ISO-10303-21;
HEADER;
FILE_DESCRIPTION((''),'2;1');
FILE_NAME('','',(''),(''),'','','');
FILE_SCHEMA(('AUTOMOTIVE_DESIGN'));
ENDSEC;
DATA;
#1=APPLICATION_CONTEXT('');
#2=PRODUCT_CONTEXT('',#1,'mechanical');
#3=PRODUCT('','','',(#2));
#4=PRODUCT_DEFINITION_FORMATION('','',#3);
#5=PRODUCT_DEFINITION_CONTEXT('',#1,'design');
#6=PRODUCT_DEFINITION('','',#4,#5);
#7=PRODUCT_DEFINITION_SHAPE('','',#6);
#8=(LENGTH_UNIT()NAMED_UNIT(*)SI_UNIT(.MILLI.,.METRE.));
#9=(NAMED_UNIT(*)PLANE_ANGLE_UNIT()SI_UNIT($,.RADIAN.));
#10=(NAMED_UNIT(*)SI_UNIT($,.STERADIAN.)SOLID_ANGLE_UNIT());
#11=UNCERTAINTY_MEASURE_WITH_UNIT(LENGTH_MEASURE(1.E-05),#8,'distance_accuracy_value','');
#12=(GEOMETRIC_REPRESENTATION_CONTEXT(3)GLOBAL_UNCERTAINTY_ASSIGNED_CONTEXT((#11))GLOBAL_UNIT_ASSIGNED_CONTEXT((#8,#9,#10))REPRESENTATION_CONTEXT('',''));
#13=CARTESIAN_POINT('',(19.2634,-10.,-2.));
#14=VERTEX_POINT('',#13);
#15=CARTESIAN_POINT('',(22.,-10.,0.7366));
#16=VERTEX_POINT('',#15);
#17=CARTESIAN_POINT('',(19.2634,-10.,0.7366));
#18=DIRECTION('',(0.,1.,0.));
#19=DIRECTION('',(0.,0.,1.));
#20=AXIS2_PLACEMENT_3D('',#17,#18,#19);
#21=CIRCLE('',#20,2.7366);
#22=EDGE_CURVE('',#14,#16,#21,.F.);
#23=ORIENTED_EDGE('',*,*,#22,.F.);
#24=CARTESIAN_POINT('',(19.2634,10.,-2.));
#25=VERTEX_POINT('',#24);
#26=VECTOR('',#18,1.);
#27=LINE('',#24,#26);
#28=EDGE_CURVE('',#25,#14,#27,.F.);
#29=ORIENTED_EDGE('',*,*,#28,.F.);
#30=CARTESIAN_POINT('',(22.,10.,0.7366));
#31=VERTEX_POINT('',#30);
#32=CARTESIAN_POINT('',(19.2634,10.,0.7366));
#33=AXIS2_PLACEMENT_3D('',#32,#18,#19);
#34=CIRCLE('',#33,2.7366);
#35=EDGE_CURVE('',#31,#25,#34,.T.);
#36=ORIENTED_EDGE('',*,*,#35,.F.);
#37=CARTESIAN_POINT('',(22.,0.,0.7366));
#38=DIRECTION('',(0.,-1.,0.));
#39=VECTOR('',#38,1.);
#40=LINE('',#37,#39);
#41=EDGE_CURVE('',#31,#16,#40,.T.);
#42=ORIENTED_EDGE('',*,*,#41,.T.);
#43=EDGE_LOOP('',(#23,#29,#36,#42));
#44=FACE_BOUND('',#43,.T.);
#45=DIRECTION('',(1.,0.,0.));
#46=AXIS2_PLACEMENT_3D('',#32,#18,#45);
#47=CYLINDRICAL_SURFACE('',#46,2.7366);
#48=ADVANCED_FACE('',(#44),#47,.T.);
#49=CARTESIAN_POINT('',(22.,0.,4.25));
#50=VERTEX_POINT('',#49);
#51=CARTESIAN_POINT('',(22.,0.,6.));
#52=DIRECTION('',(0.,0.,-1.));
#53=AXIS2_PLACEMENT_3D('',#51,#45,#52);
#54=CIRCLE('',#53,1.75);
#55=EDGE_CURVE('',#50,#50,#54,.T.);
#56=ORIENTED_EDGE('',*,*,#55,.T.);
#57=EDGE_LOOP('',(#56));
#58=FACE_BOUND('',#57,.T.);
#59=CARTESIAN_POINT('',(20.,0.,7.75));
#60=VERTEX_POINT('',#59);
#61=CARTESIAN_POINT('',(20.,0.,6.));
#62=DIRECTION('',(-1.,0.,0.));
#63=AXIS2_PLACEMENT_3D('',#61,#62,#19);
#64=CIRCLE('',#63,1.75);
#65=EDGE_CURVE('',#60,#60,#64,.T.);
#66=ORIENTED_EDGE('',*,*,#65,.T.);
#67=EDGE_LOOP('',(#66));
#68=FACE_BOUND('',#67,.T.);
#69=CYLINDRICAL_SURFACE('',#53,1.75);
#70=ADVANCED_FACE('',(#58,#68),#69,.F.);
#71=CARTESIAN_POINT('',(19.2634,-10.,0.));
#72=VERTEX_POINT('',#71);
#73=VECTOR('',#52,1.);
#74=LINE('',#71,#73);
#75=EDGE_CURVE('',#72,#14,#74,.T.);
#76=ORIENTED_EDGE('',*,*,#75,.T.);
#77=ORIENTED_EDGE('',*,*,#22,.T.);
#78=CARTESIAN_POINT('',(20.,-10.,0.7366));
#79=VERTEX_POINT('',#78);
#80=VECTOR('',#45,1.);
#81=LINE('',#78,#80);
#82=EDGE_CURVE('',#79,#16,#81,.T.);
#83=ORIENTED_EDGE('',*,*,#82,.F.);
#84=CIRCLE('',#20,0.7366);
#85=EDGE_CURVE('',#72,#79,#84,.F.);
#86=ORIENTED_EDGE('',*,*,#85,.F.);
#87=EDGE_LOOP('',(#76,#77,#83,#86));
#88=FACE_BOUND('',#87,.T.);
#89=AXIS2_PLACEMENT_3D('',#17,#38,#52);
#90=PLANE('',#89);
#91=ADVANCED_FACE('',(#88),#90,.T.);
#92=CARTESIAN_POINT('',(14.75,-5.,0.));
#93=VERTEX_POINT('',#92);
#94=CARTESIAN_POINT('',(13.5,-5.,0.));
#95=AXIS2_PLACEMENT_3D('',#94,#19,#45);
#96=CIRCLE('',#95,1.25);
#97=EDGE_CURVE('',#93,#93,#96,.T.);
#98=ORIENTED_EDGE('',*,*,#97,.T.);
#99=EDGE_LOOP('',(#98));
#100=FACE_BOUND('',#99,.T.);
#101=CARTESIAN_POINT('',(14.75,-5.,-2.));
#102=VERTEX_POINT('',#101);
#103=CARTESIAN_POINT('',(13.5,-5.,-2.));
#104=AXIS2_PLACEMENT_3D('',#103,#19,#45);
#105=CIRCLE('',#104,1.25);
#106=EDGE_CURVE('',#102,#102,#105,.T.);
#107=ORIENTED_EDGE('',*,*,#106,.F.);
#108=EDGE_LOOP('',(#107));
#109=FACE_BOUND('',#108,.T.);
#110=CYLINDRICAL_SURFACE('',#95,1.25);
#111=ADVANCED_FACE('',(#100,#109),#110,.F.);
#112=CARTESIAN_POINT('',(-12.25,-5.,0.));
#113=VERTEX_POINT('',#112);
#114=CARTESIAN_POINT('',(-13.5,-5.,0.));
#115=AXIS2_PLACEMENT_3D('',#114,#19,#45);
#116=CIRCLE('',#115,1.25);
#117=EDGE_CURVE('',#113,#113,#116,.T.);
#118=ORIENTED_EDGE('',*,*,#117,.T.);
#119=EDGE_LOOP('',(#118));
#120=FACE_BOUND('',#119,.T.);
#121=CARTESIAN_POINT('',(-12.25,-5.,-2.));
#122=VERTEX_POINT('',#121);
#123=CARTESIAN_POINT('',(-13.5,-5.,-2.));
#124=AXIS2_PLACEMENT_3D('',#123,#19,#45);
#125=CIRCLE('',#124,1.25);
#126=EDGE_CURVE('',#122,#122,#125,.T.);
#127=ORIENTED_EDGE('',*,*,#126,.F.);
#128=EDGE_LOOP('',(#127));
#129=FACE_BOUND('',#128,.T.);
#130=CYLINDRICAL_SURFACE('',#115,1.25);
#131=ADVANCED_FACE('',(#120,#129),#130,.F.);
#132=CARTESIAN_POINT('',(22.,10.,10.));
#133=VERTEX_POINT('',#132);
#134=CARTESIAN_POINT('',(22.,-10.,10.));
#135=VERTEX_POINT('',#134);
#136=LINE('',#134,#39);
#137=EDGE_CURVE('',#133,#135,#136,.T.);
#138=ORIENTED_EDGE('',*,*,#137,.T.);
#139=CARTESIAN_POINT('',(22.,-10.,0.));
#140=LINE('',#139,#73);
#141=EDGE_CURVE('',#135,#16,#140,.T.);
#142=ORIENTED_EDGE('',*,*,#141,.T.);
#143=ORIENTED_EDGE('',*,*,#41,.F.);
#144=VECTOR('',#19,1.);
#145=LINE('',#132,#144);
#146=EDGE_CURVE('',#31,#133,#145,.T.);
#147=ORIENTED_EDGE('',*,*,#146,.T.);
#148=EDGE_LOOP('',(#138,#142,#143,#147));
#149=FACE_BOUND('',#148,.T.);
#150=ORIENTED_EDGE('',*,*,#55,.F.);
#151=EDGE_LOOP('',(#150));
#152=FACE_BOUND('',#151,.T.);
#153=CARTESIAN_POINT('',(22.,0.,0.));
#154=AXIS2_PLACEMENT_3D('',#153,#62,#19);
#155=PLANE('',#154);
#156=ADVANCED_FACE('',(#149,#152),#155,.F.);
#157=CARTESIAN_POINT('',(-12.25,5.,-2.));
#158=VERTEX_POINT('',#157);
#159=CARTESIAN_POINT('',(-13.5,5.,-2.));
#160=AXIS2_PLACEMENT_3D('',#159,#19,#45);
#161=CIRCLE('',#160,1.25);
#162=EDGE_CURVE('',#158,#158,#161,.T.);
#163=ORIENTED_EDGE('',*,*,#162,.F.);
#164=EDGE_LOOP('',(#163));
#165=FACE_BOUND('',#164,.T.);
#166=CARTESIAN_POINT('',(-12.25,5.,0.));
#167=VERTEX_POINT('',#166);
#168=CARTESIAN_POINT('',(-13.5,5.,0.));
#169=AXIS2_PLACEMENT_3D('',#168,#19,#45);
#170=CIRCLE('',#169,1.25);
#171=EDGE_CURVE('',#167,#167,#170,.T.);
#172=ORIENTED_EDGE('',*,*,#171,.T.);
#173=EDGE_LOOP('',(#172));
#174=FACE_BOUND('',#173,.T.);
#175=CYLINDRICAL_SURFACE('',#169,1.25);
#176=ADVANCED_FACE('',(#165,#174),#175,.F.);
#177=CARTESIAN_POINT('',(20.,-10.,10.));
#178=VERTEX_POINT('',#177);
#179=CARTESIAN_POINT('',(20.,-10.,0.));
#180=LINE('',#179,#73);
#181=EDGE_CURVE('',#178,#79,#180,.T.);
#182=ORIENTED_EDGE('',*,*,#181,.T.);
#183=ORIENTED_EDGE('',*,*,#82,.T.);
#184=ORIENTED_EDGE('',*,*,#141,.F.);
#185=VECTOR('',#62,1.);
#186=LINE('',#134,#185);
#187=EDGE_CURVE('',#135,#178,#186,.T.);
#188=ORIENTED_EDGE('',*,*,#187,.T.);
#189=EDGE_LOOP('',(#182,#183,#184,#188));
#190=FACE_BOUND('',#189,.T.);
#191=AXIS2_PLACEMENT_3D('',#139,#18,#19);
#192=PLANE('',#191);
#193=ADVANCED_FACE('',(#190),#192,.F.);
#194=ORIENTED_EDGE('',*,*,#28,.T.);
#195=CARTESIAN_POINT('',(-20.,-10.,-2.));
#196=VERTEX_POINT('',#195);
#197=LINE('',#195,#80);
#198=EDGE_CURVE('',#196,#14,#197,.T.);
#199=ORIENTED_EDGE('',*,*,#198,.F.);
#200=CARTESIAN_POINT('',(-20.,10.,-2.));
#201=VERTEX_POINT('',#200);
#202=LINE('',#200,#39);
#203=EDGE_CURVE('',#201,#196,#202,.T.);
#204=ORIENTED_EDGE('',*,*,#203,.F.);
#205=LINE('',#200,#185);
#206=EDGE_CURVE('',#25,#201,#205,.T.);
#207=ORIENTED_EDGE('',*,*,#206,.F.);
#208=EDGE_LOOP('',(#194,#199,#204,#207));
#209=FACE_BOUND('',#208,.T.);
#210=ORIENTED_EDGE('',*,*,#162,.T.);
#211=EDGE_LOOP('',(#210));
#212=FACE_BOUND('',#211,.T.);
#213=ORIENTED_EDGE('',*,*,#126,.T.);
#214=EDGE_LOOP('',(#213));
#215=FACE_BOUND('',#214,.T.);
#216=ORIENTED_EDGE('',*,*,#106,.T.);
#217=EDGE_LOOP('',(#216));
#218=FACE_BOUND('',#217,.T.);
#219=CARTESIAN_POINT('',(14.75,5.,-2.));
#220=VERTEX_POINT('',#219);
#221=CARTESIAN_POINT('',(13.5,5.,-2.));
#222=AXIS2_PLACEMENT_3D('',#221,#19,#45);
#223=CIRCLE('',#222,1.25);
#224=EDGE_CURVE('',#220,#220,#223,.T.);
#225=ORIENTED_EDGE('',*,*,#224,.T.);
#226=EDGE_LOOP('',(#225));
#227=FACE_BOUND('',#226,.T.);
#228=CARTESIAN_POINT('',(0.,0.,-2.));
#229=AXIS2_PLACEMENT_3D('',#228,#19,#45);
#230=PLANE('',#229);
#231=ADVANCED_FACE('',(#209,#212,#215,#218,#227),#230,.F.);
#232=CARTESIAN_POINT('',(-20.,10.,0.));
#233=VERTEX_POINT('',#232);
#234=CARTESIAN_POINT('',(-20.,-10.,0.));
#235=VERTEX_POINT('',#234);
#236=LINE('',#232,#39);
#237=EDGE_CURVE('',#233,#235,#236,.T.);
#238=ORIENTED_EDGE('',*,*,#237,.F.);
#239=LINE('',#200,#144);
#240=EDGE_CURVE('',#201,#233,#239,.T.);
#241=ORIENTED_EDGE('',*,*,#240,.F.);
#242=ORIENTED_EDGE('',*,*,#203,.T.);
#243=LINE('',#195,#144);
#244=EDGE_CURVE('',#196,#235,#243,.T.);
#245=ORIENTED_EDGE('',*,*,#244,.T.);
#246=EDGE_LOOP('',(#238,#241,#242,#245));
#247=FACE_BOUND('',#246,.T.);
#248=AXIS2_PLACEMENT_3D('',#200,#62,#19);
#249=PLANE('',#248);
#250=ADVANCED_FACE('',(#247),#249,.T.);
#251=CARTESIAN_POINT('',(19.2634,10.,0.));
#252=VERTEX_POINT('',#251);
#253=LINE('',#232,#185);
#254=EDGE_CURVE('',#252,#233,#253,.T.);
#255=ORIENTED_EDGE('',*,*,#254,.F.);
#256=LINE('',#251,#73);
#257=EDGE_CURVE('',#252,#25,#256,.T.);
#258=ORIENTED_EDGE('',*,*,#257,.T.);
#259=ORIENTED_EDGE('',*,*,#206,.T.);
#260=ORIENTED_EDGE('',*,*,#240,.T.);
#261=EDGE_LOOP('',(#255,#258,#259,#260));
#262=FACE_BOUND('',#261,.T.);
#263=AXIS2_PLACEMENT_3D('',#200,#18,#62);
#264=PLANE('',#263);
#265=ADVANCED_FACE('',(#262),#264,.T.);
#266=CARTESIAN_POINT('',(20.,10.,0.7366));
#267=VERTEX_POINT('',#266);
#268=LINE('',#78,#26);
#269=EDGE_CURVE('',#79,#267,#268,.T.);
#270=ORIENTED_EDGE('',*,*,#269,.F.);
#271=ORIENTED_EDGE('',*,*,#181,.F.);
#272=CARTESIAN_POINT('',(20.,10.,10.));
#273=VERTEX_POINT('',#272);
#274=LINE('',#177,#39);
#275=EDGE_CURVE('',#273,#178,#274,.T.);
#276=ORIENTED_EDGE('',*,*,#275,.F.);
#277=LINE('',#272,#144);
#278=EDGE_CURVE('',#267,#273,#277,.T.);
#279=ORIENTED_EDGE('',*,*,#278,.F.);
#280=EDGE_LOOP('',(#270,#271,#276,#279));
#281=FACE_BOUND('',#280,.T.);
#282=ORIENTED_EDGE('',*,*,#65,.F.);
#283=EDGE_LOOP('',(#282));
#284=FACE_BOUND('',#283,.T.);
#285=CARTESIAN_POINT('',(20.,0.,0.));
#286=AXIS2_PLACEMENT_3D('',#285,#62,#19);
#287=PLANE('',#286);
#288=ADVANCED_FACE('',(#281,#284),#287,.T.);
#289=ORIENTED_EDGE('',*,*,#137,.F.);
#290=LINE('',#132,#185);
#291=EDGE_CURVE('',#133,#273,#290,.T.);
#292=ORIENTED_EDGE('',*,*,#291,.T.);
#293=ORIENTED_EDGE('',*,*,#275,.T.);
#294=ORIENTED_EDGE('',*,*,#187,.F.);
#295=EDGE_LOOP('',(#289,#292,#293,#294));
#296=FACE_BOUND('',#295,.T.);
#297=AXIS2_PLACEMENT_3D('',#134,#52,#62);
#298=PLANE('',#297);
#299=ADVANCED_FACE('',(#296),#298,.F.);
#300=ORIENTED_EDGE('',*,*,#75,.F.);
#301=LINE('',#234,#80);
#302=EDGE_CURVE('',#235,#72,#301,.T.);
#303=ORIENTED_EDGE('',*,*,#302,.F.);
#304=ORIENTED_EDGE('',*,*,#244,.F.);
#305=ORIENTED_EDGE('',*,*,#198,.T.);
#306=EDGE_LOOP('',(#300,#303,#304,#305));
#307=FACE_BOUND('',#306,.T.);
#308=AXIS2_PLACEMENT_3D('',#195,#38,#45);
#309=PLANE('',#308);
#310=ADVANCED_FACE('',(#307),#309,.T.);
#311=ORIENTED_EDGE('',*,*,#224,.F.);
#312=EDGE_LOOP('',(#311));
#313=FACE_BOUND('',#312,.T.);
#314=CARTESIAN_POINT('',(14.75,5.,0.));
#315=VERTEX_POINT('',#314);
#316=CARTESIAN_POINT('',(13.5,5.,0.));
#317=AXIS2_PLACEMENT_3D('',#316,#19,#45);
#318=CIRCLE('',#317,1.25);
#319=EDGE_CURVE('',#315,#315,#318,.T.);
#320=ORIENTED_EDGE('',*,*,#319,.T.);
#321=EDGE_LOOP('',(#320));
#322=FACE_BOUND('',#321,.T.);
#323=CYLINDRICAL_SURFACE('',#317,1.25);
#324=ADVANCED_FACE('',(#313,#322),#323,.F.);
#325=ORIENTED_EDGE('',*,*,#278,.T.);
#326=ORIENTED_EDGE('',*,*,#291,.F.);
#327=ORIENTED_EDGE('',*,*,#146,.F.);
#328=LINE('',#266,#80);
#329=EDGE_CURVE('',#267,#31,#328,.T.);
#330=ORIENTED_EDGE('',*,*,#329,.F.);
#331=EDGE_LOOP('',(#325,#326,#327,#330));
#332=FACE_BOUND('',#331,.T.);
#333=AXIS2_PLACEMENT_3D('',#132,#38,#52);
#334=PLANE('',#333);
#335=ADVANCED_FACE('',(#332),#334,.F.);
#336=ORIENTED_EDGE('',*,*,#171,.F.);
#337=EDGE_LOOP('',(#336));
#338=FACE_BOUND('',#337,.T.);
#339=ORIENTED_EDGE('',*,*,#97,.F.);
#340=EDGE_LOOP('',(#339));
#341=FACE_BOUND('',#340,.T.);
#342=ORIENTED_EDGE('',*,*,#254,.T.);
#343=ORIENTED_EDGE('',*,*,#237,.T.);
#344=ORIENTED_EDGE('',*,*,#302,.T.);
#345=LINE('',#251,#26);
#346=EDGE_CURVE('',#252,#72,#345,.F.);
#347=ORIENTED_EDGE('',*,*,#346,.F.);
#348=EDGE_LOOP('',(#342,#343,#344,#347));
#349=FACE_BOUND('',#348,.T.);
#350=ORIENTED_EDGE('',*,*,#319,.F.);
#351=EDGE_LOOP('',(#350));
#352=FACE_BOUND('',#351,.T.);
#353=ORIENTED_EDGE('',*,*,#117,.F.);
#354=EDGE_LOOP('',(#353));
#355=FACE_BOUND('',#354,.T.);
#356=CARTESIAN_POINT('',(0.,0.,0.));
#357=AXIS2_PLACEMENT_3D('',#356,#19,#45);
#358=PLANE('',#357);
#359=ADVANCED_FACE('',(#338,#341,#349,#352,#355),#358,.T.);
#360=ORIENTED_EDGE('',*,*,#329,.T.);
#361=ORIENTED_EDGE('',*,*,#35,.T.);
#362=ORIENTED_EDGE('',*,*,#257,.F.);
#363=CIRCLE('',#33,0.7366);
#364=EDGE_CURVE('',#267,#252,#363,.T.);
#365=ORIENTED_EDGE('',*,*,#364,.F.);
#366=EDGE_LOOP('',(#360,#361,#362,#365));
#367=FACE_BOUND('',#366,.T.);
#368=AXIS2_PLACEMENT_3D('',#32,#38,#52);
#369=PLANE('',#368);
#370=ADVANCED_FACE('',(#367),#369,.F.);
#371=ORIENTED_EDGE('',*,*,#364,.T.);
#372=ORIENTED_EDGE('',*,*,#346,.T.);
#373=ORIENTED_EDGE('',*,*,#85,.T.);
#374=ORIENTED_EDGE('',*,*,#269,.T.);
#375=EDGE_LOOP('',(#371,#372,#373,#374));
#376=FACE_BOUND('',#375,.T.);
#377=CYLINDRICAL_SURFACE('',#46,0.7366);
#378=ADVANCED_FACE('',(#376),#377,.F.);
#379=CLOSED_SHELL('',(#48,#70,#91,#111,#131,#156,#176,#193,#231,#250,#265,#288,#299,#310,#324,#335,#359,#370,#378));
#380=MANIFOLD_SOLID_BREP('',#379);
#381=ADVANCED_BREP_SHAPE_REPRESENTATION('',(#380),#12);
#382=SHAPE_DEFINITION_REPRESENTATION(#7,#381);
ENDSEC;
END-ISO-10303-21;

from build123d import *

# Parameters (mm, degrees)
SKETCH_1_W                       = 40
SKETCH_1_H                       = 20
SM_BASE_FLANGE_1_DEPTH           = 2
SM_EDGE_FLANGE_1_STRIP_W         = 9.4732
SM_EDGE_FLANGE_1_STRIP_H         = 2
SM_EDGE_FLANGE_1_STRIP_CUT_DEPTH = 20
SM_EDGE_FLANGE_1_DEPTH           = 20
HOLE_WIZARD_M3_2_D               = 2.5
HOLE_WIZARD_3_5_3_5_2_D          = 3.5


# Sheet-metal steps are written as plain solids
with BuildPart() as part:
    # Sketch 1 → 基材-凸緣1 (new body)
    with BuildSketch(Plane.XY):
        Rectangle(SKETCH_1_W, SKETCH_1_H)
    extrude(amount=-SM_BASE_FLANGE_1_DEPTH)

    # 邊線-凸緣1 strip (across the edge) → 邊線-凸緣1 strip cut (cut)
    with BuildSketch(Plane(origin=(20, -10, 0), x_dir=(-1, 0, 0), z_dir=(0, 1, 0))):
        with Locations((-4, -1)):
            Rectangle(SM_EDGE_FLANGE_1_STRIP_W, SM_EDGE_FLANGE_1_STRIP_H)
    extrude(amount=SM_EDGE_FLANGE_1_STRIP_CUT_DEPTH, mode=Mode.SUBTRACT)

    # 邊線-凸緣1 section (across the edge) → 邊線-凸緣1 (add)
    with BuildSketch(Plane(origin=(20, -10, 0), x_dir=(-1, 0, 0), z_dir=(0, 1, 0))):
        with BuildLine():
            Line((-2, 0.7366), (-2, 10))
            Line((-2, 10), (0, 10))
            Line((0, 10), (0, 0.7366))
            ThreePointArc((0, 0.7366), (0.215745145, 0.215745145), (0.7366, 0))
            Line((0.7366, 0), (0.7366, -2))
            ThreePointArc((0.7366, -2), (-1.198468417, -1.198468417), (-2, 0.7366))
        make_face()
    extrude(amount=SM_EDGE_FLANGE_1_DEPTH)

    # M3 螺紋孔2 (through all)
    with Locations(Plane.XY):
        with Locations((-13.5, -5), (13.5, -5), (13.5, 5), (-13.5, 5)):
            Hole(HOLE_WIZARD_M3_2_D / 2)

    # Ø3.5 (3.5) 直徑孔2 (through all)
    with Locations(Plane(origin=(22, 0, 0), x_dir=(0, 0, -1), z_dir=(1, 0, 0))):
        with Locations((-6, 0)):
            Hole(HOLE_WIZARD_3_5_3_5_2_D / 2)


solid = part.part
